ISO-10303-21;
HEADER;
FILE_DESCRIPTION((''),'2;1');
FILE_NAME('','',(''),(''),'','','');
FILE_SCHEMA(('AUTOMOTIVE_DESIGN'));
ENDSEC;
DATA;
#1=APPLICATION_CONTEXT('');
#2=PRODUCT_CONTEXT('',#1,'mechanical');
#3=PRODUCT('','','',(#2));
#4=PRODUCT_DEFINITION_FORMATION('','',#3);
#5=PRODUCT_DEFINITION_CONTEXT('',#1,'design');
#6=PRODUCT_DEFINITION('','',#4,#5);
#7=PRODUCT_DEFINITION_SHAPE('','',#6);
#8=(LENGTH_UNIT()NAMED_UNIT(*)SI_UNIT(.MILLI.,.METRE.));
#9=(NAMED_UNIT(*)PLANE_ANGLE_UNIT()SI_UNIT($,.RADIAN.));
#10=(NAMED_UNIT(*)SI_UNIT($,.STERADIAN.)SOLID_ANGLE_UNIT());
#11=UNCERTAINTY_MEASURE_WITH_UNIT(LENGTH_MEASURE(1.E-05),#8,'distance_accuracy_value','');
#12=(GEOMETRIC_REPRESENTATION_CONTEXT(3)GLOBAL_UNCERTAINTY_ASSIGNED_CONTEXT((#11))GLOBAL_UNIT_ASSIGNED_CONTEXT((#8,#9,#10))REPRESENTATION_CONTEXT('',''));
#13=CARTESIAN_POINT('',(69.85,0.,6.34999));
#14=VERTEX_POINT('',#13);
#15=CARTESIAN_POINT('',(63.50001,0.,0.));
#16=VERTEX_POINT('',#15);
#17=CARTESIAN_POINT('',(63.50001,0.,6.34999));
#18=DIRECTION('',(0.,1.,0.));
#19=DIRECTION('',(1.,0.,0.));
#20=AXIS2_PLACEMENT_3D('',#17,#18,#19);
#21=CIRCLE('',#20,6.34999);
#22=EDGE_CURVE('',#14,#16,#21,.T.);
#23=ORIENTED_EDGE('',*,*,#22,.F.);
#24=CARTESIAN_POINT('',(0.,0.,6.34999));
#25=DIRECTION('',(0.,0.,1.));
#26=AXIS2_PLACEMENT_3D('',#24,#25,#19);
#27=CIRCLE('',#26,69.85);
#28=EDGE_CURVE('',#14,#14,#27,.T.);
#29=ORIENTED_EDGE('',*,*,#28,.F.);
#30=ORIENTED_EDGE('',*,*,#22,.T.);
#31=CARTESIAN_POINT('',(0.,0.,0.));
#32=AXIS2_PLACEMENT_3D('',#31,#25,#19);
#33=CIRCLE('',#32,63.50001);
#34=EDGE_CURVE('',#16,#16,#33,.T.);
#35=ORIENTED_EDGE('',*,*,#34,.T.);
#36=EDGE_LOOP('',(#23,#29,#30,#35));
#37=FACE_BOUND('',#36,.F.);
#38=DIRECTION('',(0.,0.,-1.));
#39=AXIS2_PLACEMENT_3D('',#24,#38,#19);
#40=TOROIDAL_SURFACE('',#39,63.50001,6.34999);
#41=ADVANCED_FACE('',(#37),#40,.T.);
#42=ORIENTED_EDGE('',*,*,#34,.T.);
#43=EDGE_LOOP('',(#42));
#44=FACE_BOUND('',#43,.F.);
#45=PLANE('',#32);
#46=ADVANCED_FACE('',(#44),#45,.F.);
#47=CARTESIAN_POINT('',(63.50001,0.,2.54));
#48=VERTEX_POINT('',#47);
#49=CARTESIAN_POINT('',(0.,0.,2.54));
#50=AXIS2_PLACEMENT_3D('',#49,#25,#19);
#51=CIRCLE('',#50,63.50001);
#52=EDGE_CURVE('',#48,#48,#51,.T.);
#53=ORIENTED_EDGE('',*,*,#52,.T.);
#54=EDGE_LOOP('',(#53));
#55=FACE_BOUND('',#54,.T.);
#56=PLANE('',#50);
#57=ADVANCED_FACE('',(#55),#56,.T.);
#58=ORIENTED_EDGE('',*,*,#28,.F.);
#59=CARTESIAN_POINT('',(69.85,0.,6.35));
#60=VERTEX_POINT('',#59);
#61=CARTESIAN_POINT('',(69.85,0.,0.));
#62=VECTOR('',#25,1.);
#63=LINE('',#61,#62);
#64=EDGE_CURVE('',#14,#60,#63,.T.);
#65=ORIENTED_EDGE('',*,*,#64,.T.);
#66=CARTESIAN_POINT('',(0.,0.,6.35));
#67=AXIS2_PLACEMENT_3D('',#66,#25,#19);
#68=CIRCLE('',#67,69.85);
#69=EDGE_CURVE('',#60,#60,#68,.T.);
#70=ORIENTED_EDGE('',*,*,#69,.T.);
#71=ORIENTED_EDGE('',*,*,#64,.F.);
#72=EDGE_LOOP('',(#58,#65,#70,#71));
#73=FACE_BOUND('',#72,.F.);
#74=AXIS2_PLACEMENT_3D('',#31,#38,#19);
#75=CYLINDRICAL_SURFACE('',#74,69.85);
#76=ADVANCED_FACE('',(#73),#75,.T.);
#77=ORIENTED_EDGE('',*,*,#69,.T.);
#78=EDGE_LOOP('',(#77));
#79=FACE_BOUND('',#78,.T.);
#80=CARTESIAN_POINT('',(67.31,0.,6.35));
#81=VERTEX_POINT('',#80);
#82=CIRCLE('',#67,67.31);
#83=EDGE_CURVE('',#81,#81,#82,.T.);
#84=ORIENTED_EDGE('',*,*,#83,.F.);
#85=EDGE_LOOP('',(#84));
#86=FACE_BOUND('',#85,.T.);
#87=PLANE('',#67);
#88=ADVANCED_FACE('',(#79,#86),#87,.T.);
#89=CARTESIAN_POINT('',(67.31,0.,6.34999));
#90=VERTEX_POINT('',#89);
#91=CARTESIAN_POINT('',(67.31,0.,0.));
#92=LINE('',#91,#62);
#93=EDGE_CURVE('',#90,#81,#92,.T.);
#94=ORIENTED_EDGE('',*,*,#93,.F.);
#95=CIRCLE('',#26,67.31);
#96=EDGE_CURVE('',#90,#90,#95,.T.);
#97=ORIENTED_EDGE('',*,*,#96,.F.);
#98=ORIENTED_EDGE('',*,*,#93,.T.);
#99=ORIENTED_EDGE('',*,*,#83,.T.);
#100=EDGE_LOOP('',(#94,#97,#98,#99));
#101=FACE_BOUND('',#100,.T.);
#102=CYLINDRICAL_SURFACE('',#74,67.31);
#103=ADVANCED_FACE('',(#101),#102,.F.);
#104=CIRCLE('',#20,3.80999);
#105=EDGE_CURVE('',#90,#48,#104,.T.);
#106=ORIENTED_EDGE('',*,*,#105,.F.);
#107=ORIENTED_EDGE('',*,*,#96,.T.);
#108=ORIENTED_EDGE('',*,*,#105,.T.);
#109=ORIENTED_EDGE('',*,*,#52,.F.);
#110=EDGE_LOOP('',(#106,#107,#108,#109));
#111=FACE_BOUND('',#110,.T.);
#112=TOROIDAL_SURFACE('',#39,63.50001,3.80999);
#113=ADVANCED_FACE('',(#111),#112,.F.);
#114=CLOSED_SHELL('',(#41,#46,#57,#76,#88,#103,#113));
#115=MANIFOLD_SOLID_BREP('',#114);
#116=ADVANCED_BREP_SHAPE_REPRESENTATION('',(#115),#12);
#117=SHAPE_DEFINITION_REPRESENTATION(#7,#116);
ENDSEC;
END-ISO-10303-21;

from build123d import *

# Parameters (mm, degrees)
F0_R     = 69.85
F1_DEPTH = 6.35
F2_R     = 6.34999
F3_T     = 2.54


# Not quite as in the source:
# - a fillet or chamfer is up to 0.001 mm smaller than in the source, because OpenCascade refuses the exact size
# - a shell that OpenCascade refuses in one call is made with other operations: the cavity is built on its own and cut out


with BuildPart() as f1:
    # F0 (on Top) → F1 (new body)
    with BuildSketch(Plane.XY):
        Circle(F0_R)
    extrude(amount=F1_DEPTH)

    # F2 (radius 6.35 in the source; OpenCascade refuses exactly that, so slightly less here)
    f2_edges = [f1.edges().sort_by_distance(p)[0] for p in [
        (-69.85, 0, 0),
    ]]
    fillet(f2_edges, radius=F2_R)

    # F3: shell of thickness 2.54, made by hand


with BuildPart() as f3_core1:
    # F3_t2: copy of F1
    add(f1.part)

    # the walls: a layer under each face that stays
    f3_faces = [f3_core1.faces().sort_by_distance(p)[0] for p in [
        (-69.85, 0, 6.349995),
        (-67.9901309895, 0, 1.8598690105),
        (0, 0, 0),
    ]]
    thicken(f3_faces, amount=-F3_T, mode=Mode.SUBTRACT)


with BuildPart() as f1_1:
    add(f1.part)

    # what is left inside the walls is the cavity
    f3_cavity = [f3_core1.part.solids().sort_by_distance(p)[0] for p in [
        (0, -22.436667, 6.3246),
    ]]
    add(f3_cavity, mode=Mode.SUBTRACT)


solid = f1_1.part
